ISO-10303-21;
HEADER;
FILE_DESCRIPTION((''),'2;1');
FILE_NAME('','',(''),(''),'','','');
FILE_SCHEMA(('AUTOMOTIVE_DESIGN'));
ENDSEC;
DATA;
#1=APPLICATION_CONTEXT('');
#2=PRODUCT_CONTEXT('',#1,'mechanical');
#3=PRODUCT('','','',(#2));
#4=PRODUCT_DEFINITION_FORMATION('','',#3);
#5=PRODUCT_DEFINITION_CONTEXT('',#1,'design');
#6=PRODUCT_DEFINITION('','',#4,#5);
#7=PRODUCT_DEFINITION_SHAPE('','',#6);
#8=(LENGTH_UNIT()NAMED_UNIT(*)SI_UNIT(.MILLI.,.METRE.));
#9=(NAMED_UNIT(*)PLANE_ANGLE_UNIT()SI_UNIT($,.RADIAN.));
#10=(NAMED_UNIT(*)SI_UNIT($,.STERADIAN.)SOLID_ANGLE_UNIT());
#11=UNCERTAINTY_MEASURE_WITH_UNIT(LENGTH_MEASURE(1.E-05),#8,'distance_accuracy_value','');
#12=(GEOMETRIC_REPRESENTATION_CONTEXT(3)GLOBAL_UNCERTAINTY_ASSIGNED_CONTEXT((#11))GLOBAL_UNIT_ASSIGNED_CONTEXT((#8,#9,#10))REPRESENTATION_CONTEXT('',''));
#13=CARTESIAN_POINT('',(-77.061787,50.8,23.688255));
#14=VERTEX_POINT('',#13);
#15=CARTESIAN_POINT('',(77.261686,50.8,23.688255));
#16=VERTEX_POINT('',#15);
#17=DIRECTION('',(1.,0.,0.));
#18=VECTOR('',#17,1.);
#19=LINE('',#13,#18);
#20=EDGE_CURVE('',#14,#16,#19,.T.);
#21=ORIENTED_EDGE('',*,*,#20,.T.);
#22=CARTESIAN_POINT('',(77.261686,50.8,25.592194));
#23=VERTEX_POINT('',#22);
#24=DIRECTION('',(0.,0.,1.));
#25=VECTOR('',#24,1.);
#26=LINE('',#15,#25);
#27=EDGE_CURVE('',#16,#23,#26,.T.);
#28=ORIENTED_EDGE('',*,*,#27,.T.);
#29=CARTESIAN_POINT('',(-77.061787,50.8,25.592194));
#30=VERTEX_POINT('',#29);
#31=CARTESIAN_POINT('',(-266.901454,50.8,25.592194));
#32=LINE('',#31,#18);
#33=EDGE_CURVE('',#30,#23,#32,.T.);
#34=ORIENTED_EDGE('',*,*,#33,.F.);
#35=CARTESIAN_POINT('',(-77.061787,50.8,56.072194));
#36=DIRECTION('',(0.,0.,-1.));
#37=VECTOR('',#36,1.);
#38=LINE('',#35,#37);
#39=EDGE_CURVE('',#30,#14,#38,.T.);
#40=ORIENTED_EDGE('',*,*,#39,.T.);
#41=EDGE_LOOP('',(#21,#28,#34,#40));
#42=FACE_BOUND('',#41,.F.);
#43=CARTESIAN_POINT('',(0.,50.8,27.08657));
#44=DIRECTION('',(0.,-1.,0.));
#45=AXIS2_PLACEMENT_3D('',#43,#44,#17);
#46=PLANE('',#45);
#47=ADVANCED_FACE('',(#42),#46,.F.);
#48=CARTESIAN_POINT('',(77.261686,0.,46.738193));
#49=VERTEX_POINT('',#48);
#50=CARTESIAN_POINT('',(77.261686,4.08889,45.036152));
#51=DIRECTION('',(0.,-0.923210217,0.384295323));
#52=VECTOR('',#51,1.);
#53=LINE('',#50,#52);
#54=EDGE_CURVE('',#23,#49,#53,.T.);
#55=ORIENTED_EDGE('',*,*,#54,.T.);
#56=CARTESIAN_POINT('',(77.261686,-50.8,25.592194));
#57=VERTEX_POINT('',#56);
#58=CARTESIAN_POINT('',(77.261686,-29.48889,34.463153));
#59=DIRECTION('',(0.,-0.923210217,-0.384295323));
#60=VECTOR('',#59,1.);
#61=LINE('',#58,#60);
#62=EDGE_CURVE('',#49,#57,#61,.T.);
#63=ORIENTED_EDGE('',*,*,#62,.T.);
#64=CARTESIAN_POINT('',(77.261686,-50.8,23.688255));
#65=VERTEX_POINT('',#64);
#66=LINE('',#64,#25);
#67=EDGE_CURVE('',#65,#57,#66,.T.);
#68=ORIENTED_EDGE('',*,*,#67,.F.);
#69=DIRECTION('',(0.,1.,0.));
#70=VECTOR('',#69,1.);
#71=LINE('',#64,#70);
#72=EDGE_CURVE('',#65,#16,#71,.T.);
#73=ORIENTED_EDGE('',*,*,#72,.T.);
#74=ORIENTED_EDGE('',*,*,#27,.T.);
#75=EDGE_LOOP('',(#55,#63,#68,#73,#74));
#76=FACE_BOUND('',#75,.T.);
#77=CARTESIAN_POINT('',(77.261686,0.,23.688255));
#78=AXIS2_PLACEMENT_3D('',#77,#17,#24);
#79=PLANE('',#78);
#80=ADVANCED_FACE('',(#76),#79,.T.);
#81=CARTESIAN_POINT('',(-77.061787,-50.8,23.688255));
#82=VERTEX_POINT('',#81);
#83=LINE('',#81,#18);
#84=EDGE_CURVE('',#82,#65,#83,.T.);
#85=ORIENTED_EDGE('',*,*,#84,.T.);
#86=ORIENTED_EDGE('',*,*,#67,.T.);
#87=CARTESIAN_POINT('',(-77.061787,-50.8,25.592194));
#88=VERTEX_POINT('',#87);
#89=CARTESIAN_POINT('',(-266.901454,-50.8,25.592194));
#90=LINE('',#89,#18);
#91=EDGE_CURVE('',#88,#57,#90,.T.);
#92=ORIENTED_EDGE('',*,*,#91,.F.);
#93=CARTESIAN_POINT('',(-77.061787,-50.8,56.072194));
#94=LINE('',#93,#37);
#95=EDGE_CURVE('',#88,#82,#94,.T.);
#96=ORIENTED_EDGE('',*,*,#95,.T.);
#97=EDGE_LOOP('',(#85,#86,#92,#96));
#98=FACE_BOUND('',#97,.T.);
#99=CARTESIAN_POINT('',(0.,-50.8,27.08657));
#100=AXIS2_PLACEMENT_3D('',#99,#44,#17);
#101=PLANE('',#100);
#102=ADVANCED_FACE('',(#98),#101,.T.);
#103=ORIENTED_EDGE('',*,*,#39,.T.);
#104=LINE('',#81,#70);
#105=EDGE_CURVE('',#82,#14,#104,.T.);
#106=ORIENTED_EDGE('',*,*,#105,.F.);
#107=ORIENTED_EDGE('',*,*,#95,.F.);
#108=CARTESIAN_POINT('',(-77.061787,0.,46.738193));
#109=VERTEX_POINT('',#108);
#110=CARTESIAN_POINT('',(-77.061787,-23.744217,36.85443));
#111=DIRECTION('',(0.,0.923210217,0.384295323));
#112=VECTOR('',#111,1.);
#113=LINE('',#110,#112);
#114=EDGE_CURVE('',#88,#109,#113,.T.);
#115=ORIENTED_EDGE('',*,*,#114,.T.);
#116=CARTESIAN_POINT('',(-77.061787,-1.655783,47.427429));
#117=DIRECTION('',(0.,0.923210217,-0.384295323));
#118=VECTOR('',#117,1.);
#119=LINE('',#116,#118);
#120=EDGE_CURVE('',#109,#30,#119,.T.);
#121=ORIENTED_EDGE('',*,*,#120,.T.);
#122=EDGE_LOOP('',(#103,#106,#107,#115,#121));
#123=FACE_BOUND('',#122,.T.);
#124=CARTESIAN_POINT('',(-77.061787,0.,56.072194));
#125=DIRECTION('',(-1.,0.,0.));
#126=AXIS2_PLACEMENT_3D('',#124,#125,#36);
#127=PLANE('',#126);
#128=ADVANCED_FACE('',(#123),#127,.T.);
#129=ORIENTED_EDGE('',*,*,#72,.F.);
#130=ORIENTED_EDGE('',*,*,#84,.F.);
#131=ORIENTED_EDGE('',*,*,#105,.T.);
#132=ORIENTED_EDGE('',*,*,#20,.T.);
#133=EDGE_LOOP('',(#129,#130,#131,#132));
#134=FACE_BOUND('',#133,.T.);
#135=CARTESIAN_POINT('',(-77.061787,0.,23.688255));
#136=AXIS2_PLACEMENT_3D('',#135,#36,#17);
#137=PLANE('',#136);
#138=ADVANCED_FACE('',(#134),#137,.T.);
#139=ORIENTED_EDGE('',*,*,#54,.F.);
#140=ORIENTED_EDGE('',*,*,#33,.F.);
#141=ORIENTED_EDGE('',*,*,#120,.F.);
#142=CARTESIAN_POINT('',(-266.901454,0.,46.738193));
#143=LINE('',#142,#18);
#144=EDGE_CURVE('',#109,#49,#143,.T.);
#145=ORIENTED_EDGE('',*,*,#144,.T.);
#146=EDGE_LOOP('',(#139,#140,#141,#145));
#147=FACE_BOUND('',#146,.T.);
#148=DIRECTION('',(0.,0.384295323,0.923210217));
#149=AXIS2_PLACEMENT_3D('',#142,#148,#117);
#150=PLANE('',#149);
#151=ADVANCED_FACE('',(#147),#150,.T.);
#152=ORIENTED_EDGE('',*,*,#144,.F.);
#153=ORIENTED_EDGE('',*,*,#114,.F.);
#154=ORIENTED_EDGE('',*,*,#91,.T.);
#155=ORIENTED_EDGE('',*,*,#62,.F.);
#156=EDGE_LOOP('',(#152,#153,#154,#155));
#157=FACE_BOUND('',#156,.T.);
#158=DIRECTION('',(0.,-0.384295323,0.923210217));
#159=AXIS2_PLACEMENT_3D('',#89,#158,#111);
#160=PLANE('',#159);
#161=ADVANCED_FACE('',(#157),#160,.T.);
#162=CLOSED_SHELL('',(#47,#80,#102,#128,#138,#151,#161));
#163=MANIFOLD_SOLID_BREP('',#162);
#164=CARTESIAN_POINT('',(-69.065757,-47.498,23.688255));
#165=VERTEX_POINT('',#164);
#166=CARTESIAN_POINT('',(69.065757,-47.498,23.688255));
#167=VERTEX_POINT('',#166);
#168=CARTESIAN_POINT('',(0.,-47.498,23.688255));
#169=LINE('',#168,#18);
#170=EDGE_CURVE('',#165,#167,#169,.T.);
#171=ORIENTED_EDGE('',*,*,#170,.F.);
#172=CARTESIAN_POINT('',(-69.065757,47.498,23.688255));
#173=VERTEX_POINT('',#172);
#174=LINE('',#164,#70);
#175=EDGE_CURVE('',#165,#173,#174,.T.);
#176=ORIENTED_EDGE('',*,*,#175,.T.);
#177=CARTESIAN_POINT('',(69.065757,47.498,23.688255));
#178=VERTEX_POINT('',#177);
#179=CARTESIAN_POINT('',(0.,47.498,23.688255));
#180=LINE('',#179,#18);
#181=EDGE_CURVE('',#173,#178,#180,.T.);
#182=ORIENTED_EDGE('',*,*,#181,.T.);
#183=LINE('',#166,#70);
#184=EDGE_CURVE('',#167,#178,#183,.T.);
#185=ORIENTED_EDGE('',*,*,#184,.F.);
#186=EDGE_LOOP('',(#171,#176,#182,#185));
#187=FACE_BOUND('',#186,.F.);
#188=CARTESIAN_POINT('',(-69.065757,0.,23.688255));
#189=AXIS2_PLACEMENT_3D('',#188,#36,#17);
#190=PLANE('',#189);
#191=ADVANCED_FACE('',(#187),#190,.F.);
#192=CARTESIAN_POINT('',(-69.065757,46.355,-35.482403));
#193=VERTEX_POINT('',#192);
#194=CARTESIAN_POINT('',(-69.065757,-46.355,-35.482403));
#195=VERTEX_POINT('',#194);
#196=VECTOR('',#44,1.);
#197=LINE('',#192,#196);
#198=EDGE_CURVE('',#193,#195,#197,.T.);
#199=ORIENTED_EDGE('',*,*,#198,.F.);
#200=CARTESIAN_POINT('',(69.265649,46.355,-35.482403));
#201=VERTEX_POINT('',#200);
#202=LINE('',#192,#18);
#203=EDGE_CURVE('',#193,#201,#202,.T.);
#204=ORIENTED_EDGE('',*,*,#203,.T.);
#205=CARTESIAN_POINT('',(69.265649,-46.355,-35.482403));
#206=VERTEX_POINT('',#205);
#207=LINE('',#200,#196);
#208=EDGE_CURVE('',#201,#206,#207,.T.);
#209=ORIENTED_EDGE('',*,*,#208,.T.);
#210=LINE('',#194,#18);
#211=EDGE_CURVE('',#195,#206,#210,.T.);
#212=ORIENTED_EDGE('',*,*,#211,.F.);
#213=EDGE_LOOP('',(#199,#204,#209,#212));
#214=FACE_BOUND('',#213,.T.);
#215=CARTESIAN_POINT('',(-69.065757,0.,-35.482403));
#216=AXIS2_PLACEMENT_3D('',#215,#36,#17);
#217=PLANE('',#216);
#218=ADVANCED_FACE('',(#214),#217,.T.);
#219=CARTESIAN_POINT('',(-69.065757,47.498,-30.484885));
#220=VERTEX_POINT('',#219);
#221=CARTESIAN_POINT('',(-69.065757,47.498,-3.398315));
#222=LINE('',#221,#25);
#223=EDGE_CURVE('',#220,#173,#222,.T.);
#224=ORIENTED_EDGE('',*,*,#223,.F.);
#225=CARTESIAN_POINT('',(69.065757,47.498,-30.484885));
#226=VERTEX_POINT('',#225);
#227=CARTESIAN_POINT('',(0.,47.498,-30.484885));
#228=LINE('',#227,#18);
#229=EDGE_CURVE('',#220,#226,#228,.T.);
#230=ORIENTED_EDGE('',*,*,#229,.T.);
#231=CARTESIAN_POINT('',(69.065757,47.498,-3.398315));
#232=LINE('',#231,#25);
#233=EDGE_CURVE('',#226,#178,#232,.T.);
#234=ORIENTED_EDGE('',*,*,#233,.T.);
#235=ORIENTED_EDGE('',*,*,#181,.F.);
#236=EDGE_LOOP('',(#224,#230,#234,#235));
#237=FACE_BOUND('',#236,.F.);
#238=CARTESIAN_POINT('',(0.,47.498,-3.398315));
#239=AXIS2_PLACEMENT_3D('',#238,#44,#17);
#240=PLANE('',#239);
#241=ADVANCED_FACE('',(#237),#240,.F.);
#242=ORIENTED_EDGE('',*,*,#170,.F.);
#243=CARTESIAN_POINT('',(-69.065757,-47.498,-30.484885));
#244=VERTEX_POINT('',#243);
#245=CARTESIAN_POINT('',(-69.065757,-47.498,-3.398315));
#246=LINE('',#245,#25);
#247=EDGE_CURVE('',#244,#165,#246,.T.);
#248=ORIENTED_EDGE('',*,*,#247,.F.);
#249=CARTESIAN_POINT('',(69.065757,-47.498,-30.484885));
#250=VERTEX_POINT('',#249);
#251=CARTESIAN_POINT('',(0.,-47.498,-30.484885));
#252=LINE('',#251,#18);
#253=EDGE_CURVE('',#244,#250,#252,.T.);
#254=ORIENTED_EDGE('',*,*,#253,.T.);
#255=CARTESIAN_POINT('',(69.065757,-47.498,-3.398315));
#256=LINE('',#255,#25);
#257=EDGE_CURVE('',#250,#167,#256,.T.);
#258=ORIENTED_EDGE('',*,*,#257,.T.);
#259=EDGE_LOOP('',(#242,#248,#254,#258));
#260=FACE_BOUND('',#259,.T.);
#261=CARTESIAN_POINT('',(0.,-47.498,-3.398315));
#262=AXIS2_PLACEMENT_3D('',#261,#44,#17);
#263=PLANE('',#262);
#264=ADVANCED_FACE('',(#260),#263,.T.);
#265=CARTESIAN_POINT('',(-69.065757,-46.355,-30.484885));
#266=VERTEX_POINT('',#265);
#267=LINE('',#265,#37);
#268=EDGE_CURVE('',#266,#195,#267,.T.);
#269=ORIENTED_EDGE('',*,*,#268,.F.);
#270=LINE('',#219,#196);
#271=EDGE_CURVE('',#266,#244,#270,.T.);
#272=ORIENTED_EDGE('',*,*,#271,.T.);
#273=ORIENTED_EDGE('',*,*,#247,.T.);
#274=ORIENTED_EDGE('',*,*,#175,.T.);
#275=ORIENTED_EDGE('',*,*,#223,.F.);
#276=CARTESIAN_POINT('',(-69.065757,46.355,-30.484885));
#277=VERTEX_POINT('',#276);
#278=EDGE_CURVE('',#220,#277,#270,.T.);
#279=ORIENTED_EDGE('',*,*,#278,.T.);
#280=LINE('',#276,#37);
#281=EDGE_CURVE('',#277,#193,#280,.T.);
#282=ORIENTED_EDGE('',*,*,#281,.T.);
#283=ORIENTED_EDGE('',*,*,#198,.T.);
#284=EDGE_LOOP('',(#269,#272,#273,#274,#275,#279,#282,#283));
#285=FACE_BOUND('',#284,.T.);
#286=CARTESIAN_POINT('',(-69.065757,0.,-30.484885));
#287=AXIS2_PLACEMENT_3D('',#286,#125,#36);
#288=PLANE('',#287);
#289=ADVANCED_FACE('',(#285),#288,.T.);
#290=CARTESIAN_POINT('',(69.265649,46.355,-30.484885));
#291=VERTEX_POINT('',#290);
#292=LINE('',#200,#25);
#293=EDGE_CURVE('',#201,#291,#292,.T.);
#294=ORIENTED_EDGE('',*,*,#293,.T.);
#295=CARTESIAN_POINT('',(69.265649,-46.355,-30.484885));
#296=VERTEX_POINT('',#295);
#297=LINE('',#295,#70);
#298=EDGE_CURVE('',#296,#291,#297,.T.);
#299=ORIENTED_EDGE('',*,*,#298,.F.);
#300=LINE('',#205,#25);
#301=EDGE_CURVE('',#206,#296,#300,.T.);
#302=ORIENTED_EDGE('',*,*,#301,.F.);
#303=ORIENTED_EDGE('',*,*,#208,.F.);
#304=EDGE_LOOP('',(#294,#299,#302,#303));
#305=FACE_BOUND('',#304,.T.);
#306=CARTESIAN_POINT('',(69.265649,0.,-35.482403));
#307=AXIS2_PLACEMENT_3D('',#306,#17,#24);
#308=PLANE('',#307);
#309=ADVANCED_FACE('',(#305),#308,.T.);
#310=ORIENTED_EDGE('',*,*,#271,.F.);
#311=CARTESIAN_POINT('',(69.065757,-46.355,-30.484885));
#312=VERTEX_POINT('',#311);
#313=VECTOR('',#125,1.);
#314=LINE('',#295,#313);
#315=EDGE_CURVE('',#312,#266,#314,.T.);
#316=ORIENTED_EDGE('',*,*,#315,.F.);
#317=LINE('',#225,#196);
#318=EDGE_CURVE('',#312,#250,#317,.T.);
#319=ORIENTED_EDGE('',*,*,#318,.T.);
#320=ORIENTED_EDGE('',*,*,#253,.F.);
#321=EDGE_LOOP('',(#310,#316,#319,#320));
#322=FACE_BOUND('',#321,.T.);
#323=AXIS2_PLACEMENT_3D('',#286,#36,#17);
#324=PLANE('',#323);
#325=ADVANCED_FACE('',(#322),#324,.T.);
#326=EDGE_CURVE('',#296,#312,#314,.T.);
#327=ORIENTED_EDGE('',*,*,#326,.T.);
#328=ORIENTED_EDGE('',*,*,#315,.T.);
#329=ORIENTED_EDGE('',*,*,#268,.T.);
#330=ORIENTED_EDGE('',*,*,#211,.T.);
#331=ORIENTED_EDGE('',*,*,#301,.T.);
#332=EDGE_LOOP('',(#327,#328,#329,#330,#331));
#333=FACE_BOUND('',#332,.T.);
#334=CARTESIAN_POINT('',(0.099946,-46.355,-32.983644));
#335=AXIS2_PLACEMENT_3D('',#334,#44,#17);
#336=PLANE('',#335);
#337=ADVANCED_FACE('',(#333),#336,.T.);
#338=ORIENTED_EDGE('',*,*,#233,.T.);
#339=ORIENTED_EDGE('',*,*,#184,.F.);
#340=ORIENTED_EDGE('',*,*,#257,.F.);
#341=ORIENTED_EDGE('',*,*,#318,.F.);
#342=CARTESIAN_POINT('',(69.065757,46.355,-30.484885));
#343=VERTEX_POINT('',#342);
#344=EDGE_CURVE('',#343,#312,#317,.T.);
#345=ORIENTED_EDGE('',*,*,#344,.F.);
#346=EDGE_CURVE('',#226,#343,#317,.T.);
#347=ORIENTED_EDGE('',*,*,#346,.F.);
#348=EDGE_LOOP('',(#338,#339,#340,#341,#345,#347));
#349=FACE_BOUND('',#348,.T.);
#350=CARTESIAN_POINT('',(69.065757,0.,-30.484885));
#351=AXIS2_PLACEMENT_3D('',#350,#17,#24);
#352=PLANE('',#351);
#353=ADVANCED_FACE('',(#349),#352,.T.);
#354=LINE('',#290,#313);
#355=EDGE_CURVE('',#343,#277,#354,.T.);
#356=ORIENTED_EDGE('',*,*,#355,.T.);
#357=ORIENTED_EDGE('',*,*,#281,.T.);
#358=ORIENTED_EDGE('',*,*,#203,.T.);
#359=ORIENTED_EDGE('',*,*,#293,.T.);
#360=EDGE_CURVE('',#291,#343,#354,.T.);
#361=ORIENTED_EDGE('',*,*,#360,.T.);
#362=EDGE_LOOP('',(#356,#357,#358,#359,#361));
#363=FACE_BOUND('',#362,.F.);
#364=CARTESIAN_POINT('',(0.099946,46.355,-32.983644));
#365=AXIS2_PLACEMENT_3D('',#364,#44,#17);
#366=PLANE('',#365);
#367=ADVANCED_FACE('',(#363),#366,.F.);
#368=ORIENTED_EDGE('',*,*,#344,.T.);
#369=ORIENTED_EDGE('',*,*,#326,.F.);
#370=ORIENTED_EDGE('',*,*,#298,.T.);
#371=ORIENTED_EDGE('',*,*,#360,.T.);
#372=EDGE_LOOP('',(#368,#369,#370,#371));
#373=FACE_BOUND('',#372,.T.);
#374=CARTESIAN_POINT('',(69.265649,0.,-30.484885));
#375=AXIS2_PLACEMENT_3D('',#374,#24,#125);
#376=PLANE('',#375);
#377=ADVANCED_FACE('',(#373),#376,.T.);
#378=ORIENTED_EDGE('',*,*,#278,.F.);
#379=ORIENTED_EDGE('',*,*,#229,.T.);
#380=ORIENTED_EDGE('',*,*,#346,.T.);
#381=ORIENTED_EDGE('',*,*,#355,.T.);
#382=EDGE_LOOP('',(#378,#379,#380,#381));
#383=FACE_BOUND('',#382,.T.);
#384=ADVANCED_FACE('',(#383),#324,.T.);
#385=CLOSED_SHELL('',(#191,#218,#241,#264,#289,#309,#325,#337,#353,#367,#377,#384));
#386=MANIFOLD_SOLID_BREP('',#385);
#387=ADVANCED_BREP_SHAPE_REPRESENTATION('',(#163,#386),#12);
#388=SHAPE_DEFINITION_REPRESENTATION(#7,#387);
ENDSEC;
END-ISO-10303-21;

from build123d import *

# Parameters (mm, degrees)
F0_W        = 138.1315141916
F0_H        = 54.1731398553
F1_DEPTH    = 47.498
F0_H_2      = 6.7966300994
F2_DEPTH    = 50.8
F3_T1_DEPTH = 534.0028075166
F4_DEPTH    = 46.355


# Not quite as in the source:
# - a fillet or chamfer that OpenCascade refuses, or shapes differently, is made with other operations: its cross-section is extruded or revolved along the edge and cut away or added


with BuildPart() as f1:
    # F0 (on Front) → F1 (new body, symmetric)
    with BuildSketch(Plane.XZ):
        with Locations((0, -3.3983150497)):
            Rectangle(F0_W, F0_H)
    extrude(amount=F1_DEPTH, both=True)

    # F0 (on Front) → F4 (join, symmetric)
    with BuildSketch(Plane.XZ):
        Polygon((69.0657570958, -30.4848849773), (-69.0657570958, -30.4848849773), (-69.0657570958, -35.4824028909), (69.2656487226, -35.4824028909), (69.2656487226, -30.4848849773), align=None)
    extrude(amount=F4_DEPTH, both=True)


with BuildPart() as f2:
    # F0 (on Front) → F2 (new body, symmetric)
    with BuildSketch(Plane.XZ):
        with Locations((0, 27.0865699276)):
            Rectangle(F0_W, F0_H_2)
        Polygon((-69.0657570958, 23.6882548779), (-69.0657570958, 30.4848849773), (69.0657570958, 30.4848849773), (69.0657570958, 23.6882548779), (77.2616863251, 23.6882548779), (77.2616863251, 56.0721941292), (-77.0617872477, 56.0721941292), (-77.0617872477, 23.6882548779), align=None)
    extrude(amount=F2_DEPTH, both=True)

    # F3: chamfer of 30.48 x 73.2234970305 on 2 edges, made by hand

    # F3_s2 → F3_t1 (cut)
    with BuildSketch(Plane.YZ.offset(-266.9014542196)):
        Polygon((-22.4234970305, 56.0721941292), (50.8, 25.5921941292), (50.8, 56.0721941292), align=None)
        Polygon((-50.8, 25.5921941292), (22.4234970305, 56.0721941292), (-50.8, 56.0721941292), align=None)
    extrude(amount=F3_T1_DEPTH, mode=Mode.SUBTRACT)


solid = Compound([f1.part, f2.part])
